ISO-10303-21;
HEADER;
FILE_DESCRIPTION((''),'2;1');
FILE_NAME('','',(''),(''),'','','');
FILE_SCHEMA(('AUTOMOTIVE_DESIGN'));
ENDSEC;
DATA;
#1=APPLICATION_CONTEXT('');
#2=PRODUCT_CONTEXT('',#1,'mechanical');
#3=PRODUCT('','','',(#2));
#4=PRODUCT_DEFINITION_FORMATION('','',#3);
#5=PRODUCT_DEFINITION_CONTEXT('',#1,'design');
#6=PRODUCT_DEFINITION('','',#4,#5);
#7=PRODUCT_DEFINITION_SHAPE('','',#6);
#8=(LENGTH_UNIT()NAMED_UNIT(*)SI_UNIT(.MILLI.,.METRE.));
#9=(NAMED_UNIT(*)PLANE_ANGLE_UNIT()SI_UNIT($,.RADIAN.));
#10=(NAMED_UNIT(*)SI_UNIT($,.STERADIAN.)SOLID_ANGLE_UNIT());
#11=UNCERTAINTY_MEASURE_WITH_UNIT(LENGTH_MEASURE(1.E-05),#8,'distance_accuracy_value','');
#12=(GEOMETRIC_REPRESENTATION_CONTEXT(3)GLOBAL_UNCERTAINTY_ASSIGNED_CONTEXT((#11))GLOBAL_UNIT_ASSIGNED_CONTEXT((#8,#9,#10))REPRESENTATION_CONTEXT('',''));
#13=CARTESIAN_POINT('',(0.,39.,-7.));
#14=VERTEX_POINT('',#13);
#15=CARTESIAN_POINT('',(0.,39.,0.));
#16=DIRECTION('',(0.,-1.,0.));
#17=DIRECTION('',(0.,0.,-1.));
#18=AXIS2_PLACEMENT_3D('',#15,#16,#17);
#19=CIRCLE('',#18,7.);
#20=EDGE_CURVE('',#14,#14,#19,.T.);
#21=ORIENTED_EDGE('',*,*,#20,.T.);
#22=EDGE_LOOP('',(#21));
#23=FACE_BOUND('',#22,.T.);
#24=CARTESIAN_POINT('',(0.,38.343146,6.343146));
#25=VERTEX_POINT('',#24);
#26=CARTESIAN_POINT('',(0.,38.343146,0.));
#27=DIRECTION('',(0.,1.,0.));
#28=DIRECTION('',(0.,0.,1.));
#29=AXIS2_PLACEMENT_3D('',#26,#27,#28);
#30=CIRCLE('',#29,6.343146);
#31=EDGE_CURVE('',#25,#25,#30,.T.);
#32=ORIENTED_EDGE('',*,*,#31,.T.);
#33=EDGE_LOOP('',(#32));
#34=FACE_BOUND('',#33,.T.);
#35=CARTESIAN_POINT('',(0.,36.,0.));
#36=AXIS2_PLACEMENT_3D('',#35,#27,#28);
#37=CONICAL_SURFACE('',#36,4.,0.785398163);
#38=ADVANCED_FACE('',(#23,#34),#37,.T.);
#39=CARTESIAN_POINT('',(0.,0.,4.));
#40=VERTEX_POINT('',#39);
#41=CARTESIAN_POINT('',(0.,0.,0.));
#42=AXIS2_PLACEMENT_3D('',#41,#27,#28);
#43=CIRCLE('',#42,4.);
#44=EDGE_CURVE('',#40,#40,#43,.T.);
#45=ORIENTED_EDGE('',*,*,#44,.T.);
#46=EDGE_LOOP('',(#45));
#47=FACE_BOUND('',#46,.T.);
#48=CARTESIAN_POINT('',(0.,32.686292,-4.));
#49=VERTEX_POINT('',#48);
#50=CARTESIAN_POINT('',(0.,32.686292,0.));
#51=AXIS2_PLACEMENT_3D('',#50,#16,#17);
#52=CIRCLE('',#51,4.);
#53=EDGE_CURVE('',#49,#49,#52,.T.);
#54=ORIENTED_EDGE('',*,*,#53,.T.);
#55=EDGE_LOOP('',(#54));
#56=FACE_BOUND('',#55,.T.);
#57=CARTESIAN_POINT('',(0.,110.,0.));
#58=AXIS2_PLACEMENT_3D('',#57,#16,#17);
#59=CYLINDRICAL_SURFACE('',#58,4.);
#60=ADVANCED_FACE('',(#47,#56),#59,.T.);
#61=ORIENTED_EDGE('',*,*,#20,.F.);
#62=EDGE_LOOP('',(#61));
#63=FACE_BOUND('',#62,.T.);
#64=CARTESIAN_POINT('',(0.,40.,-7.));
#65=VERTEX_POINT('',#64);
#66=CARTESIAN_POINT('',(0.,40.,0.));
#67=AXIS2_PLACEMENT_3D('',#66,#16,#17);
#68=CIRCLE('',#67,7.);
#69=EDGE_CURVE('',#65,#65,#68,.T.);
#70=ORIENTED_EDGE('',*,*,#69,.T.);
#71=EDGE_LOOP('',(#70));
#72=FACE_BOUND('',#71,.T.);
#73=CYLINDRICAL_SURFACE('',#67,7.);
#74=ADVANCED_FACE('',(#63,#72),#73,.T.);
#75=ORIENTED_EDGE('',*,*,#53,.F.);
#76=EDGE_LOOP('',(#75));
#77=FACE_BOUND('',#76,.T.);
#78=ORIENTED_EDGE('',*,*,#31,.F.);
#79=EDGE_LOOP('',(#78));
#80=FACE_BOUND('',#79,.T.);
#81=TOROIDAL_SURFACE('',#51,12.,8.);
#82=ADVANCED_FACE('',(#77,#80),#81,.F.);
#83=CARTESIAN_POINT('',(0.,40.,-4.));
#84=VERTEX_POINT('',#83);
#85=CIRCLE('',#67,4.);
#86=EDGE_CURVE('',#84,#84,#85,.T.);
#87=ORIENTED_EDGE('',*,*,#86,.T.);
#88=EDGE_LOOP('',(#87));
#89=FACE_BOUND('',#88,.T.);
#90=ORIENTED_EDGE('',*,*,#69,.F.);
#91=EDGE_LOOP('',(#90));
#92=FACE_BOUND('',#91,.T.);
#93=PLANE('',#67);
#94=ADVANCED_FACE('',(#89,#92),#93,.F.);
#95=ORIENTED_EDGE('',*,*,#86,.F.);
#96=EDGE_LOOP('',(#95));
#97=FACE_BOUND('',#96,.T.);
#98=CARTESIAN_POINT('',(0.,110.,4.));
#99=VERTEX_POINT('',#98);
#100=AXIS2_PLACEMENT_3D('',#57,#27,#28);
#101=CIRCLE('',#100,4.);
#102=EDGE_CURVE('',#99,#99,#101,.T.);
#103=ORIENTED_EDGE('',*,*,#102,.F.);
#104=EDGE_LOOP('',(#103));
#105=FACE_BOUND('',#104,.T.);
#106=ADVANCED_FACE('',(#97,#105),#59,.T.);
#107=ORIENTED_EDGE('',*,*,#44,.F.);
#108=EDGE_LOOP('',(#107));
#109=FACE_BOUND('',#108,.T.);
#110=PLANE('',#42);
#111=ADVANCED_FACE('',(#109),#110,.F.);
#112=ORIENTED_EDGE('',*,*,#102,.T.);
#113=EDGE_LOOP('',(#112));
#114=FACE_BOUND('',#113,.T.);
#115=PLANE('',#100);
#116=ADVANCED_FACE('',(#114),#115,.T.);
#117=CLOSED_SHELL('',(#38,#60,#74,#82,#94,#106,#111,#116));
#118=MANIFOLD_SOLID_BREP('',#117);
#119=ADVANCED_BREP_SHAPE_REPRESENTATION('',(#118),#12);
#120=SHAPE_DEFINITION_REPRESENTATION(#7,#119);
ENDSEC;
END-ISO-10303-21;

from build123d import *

# Parameters (mm, degrees)
SKETCH1_R           = 4
BOSS_EXTRUDE1_DEPTH = 110
SKETCH2_R           = 7
BOSS_EXTRUDE2_DEPTH = 1
CHAMFER1_SIZE       = 3
FILLET1_R           = 8


with BuildPart() as part:
    # Sketch1 → Boss-Extrude1 (new body)
    with BuildSketch(Plane(origin=(0, 0, 0), x_dir=(1, 0, 0), z_dir=(0, 1, 0))):
        with Locations(Location((0, 0, 0), (0, 0, 270))):
            Circle(SKETCH1_R)
    extrude(amount=BOSS_EXTRUDE1_DEPTH)

    # Sketch2 → Boss-Extrude2 (add)
    with BuildSketch(Plane(origin=(0, 39, 0), x_dir=(-1, 0, 0), z_dir=(0, -1, 0))):
        with Locations(Location((0, 0, 0), (0, 0, 90))):
            Circle(SKETCH2_R)
    extrude(amount=-BOSS_EXTRUDE2_DEPTH)

    # Chamfer1
    chamfer1_edges = [part.edges().sort_by_distance(p)[0] for p in [
        (0, 39, -4),
    ]]
    chamfer(chamfer1_edges, length=CHAMFER1_SIZE - 0.0001)  # a hair under: the kernel refuses the full size

    # Fillet1
    fillet1_edges = [part.edges().sort_by_distance(p)[0] for p in [
        (0, 36.0001, -4),
    ]]
    fillet(fillet1_edges, radius=FILLET1_R)


solid = part.part
